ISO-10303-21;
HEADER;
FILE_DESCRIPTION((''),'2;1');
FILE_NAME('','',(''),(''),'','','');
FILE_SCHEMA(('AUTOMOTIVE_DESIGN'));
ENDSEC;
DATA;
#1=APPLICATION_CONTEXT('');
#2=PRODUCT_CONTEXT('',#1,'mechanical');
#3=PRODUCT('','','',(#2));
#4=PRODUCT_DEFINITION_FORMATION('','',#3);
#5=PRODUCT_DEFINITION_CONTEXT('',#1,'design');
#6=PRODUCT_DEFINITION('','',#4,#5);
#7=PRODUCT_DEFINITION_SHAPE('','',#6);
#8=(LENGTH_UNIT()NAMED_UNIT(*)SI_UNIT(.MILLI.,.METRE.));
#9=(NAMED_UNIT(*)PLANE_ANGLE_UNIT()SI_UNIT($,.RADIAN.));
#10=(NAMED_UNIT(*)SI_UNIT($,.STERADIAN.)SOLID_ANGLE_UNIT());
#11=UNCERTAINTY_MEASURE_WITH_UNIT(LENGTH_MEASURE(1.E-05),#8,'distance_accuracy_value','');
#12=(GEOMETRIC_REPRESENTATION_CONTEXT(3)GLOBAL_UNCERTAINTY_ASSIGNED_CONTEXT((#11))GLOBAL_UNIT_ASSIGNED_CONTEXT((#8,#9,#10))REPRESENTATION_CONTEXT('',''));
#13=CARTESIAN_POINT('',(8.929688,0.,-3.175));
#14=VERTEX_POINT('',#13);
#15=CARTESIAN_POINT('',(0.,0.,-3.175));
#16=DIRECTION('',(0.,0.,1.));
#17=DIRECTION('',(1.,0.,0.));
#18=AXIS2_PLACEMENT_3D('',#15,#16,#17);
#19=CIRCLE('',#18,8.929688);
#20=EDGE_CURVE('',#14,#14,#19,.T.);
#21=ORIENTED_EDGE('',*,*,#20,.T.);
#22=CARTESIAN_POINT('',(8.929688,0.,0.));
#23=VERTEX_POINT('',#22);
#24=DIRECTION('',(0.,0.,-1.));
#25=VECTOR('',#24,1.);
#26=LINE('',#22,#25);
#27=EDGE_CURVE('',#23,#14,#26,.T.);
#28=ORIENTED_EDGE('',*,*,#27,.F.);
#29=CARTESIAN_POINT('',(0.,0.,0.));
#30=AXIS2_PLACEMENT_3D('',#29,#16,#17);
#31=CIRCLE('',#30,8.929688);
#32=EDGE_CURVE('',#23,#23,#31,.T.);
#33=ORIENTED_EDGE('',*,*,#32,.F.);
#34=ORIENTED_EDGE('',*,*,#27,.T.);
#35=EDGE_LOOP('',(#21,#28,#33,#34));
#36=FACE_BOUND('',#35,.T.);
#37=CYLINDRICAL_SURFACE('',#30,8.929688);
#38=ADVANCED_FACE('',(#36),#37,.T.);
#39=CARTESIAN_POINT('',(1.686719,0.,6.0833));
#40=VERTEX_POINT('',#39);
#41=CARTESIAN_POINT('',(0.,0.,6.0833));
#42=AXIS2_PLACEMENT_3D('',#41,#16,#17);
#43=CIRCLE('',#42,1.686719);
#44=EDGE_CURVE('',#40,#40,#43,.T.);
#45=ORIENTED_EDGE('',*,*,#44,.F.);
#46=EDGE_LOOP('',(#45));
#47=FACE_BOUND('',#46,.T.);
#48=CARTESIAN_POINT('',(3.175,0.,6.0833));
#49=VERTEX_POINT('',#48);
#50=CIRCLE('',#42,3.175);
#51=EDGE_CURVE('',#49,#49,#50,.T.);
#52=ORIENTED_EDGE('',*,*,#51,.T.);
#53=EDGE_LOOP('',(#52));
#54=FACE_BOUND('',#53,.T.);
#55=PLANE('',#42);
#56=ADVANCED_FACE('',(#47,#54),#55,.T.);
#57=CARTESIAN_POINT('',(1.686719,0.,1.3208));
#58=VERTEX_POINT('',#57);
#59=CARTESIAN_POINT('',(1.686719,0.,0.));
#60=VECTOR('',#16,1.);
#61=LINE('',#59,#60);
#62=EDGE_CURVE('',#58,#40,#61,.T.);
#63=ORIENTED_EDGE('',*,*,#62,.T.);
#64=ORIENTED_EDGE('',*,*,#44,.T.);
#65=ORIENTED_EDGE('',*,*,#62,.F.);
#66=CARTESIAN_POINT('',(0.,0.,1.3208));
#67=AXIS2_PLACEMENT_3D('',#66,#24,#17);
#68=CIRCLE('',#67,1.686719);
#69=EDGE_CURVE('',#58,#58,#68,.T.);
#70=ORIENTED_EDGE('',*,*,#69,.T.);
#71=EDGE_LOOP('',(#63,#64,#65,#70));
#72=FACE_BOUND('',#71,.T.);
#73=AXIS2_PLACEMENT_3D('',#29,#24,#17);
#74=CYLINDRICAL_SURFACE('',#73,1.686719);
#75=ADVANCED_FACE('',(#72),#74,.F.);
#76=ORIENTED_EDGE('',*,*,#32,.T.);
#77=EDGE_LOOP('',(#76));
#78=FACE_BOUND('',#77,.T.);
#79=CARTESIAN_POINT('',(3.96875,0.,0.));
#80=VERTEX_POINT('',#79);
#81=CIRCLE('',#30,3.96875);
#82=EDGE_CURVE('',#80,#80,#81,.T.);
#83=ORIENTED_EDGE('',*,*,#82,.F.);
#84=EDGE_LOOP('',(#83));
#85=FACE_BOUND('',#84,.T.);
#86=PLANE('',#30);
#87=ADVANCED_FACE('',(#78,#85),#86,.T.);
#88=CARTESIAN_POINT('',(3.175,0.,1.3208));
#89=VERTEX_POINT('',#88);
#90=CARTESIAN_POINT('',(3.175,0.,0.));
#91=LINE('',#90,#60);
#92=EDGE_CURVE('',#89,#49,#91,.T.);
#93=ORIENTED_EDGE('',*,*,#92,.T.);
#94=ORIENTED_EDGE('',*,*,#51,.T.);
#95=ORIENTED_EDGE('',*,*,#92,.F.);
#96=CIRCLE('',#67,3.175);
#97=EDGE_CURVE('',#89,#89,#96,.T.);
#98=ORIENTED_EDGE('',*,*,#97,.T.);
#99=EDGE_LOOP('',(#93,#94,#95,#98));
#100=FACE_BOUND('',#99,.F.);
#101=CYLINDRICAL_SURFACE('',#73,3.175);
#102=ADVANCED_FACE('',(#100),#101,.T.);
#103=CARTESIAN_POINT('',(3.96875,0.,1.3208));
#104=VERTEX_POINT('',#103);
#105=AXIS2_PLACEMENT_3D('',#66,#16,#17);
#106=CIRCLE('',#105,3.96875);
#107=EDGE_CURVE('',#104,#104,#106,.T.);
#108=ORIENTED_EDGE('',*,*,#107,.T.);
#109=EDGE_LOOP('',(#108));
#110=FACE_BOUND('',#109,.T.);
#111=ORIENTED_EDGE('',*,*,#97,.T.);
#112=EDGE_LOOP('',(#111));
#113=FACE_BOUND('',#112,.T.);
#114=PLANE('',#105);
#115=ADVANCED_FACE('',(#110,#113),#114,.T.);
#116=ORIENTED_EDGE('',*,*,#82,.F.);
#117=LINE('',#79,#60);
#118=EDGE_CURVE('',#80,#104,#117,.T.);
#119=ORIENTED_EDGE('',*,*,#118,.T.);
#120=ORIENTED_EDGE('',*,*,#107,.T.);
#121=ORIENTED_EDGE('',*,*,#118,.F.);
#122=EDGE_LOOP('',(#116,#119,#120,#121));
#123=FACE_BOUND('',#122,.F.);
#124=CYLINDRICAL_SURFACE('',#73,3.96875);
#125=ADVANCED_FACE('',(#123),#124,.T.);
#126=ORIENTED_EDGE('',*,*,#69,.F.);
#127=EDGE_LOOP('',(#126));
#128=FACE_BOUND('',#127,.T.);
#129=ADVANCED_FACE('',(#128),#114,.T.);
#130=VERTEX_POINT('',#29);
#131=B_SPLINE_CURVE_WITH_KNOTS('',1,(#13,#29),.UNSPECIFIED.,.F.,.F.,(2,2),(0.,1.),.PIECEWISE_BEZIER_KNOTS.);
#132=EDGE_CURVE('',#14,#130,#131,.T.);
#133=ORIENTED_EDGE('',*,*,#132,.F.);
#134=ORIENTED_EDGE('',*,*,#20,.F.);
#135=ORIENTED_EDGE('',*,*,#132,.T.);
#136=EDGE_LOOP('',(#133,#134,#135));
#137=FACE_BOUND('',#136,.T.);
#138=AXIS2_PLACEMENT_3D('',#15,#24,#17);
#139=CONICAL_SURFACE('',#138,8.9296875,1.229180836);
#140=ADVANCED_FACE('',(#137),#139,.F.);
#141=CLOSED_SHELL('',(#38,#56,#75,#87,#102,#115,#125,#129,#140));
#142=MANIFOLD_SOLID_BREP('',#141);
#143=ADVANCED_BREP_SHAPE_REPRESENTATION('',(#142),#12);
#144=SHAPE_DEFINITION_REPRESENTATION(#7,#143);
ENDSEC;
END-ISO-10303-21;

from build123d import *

# Parameters (mm, degrees)
F0_R      = 8.9296875
F0_R_2    = 3.96875
F0_R_3    = 3.175
F0_R_4    = 1.68671875
F1_DEPTH  = 3.175
F2_DEPTH  = 1.3208
F3_DEPTH  = 6.0833
F1_FACE_R = 8.9296875


# Not quite as in the source:
# - a length typed as a fraction of an inch, garbled in the dataset ("3 / 203.2 mm" for 3/8 in), is restored


with BuildPart() as f1:
    # F0 (on Top) → F1 (new body)
    with BuildSketch(Plane.XY):
        Circle(F0_R)
        Circle(F0_R_2, mode=Mode.SUBTRACT)
        Circle(F0_R_2)
        Circle(F0_R_3, mode=Mode.SUBTRACT)
        Circle(F0_R_3)
        Circle(F0_R_4, mode=Mode.SUBTRACT)
        Circle(F0_R_4)
    extrude(amount=-F1_DEPTH)

    # F0 (on Top) → F2 (join)
    with BuildSketch(Plane.XY):
        Circle(F0_R_2)
        Circle(F0_R_3, mode=Mode.SUBTRACT)
        Circle(F0_R_3)
        Circle(F0_R_4, mode=Mode.SUBTRACT)
        Circle(F0_R_4)
    extrude(amount=F2_DEPTH)

    # F0 (on Top) → F3 (join)
    with BuildSketch(Plane.XY):
        Circle(F0_R_3)
        Circle(F0_R_4, mode=Mode.SUBTRACT)
    extrude(amount=F3_DEPTH)

    # F1_face (on face) → F4 section 0
    with BuildSketch(Plane(origin=(0, 0, -3.175), x_dir=(1, 0, 0), z_dir=(0, 0, -1)), mode=Mode.PRIVATE) as f4_s0:
        Circle(F1_FACE_R)
    loft([f4_s0.sketch, Vertex(0, 0, 0)], mode=Mode.SUBTRACT)


solid = f1.part
